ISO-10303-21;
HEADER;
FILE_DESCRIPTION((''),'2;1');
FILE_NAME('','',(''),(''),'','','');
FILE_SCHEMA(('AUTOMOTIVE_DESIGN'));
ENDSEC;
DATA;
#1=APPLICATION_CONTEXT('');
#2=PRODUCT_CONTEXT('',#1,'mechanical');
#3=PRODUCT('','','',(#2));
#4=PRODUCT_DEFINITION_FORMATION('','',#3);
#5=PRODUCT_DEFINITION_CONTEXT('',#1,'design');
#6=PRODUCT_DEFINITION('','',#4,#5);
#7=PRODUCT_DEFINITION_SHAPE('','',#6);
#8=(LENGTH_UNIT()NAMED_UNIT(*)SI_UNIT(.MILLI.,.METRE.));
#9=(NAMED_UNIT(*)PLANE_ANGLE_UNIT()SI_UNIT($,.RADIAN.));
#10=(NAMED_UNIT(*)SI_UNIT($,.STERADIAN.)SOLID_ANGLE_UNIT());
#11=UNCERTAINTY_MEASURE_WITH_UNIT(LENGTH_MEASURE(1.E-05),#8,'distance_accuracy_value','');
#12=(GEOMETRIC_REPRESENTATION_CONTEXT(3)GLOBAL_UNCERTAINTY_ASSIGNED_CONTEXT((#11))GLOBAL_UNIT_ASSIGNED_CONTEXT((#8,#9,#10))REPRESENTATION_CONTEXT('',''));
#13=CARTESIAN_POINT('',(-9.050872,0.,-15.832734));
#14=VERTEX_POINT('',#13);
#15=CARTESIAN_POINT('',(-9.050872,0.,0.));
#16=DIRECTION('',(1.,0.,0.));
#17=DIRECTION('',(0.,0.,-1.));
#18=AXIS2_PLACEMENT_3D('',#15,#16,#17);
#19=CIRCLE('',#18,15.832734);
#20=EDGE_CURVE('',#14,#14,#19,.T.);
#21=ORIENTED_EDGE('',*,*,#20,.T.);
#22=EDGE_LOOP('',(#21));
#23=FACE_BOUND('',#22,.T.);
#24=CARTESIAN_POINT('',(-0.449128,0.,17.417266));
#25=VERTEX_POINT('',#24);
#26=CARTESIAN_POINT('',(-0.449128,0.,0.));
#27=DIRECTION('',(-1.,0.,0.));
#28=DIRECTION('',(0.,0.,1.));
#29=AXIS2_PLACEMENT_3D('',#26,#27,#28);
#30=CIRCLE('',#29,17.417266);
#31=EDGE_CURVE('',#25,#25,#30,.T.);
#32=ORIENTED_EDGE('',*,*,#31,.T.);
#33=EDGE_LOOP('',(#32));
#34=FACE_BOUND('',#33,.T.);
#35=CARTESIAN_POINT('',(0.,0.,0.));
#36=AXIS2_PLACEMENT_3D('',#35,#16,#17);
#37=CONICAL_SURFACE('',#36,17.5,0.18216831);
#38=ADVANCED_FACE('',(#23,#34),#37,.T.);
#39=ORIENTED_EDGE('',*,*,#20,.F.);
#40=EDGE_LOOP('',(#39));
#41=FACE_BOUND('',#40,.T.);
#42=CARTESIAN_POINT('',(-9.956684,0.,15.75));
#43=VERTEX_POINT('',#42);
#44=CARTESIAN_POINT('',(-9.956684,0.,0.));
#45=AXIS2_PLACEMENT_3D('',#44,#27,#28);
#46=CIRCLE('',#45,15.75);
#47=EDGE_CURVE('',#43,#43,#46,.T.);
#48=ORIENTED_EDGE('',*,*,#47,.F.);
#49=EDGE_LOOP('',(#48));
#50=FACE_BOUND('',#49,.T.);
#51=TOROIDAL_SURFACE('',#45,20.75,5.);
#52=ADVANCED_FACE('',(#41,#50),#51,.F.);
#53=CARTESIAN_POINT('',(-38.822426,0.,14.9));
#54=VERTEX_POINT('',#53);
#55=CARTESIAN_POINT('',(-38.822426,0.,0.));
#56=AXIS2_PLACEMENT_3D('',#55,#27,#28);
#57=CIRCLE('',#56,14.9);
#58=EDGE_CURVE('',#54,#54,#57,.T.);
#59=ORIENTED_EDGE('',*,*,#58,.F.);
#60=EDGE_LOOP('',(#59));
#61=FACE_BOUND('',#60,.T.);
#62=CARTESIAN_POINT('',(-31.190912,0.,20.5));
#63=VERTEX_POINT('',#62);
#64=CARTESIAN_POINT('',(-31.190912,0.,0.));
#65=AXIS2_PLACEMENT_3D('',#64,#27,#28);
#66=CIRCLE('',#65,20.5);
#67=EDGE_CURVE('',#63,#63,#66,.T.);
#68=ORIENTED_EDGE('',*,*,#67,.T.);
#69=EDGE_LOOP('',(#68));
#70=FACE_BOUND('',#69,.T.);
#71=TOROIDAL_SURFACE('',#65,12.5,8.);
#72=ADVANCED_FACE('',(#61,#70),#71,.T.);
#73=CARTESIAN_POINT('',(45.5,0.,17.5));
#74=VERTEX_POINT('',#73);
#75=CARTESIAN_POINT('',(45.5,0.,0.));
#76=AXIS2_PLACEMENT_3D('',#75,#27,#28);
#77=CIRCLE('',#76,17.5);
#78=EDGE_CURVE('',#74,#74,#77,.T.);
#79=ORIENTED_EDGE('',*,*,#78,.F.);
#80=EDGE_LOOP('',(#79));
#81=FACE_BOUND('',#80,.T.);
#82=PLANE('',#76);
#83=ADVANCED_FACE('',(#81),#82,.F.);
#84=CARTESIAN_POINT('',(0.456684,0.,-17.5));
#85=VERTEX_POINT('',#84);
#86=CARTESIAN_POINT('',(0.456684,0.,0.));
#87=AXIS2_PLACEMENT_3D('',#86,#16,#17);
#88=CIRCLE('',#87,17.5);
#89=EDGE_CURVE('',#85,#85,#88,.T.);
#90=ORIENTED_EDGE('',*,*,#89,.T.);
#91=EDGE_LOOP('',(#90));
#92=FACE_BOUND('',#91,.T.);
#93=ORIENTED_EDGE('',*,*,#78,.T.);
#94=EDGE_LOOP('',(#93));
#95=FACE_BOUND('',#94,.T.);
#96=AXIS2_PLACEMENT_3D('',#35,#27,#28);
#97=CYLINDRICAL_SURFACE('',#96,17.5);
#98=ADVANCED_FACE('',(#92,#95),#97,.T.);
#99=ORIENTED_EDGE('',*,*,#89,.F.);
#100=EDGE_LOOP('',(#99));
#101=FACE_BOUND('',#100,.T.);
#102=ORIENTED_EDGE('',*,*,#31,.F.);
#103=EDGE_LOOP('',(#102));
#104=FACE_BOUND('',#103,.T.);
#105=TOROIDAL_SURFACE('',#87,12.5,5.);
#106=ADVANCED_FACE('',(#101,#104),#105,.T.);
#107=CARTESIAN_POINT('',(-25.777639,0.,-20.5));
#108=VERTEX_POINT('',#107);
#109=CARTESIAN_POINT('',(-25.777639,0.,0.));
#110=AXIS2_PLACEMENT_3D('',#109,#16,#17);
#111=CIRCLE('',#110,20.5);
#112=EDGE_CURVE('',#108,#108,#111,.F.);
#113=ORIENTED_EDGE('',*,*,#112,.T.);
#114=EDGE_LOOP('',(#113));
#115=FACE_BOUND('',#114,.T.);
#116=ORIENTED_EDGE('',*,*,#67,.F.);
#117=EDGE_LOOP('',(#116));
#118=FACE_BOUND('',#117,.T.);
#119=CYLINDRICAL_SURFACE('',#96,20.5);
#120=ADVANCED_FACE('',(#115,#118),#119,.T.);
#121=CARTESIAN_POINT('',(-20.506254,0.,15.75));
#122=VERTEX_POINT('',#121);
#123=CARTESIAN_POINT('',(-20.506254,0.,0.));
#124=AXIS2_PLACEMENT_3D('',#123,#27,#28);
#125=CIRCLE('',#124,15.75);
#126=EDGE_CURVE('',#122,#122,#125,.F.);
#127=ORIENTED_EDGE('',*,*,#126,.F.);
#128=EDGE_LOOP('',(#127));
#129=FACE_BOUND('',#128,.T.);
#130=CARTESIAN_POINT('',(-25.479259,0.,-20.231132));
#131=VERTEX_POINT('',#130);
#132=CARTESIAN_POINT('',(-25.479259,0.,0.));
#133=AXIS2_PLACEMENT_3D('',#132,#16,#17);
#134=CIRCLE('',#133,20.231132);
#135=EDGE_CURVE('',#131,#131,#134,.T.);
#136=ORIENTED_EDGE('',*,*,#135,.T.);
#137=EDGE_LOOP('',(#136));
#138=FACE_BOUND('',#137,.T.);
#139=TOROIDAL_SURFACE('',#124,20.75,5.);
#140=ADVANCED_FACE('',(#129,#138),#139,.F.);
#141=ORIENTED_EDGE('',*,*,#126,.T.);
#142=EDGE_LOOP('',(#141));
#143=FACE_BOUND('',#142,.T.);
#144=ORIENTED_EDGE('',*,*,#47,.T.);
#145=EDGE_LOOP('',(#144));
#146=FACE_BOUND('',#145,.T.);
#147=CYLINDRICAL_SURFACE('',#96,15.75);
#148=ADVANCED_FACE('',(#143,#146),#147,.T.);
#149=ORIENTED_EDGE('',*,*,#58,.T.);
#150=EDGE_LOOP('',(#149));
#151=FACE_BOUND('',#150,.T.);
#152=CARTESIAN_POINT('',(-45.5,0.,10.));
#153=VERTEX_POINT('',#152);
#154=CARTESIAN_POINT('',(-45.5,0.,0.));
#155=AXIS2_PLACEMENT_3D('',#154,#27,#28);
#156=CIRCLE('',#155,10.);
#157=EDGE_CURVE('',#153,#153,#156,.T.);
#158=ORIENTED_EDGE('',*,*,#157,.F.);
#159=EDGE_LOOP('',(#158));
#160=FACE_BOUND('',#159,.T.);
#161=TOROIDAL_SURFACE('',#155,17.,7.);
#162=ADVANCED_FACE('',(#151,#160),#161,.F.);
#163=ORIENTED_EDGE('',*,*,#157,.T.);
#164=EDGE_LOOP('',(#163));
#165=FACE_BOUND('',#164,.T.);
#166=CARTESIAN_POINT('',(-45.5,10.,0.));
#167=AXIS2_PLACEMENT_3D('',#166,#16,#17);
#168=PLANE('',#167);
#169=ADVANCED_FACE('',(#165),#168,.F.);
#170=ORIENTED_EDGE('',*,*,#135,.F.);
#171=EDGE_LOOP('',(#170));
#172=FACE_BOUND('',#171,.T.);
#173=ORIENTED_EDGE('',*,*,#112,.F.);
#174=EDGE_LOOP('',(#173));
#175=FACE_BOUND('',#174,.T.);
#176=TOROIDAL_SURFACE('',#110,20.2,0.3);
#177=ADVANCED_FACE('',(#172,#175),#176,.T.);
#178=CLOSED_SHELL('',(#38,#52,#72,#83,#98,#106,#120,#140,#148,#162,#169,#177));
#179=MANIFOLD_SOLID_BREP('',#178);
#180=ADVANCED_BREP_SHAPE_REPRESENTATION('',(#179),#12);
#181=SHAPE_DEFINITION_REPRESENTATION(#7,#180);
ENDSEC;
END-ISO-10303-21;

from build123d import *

# Parameters (mm, degrees)
FILLET1_R = 5
FILLET2_R = 0.3
FILLET3_R = 5


with BuildPart() as part:
    # Sketch3 → Revolve1 (revolve)
    with BuildSketch(Plane.XY, mode=Mode.PRIVATE) as revolve1_sk:
        with BuildLine():
            Line((45.5, 0), (45.5, 17.499999999999996))
            Line((45.5, 17.499999999999996), (0, 17.500000000006253))
            Line((0, 17.500000000006253), (-9.5, 15.75))
            Line((-9.5, 15.75), (-25.499999999999996, 15.749999999999996))
            Line((-25.499999999999996, 15.749999999999996), (-25.499999999999996, 20.5))
            Line((-25.499999999999996, 20.5), (-31.190911978745817, 20.5))
            ThreePointArc((-31.190911978745817, 20.5), (-35.92377580522551, 18.949806198638836), (-38.82242559008138, 14.9))
            ThreePointArc((-38.82242559008138, 14.9), (-41.358744151830265, 11.356419576191016), (-45.5, 10))
            Line((-45.5, 10), (-45.5, 0))
            Line((-45.5, 0), (45.5, 0))
        make_face()
    revolve(revolve1_sk.sketch.rotate(Axis((0, 0, 0), (1, 0, 0)), 90), axis=Axis((0, 0, 0), (1, 0, 0)))

    # Fillet1
    # the kernel refuses this fillet: 5 mm, written as the material it adds along each edge
    with BuildSketch(Plane(origin=(-25.499999999999996, 0, 0), x_dir=(0, 1.1e-16, 1), z_dir=(0, 1, -1.1e-16))) as fillet1_piece_1:
        with BuildLine():
            CenterArc((20.75, 4.993746088859542), FILLET1_R, 180, 87.13401601740111)
            Line((20.5, -3.55e-15), (20.495, -0.09987492177719304))
            ThreePointArc((20.495, -0.09987492177719304), (18.125, -0.10000000000000142), (15.749999999999996, -0.10000000000000142))
            Line((15.749999999999996, -0.10000000000000142), (15.649999999999997, 0))
            Line((15.649999999999997, 0), (15.65, 4.993746088859542))
            Line((15.65, 4.993746088859542), (15.75, 4.993746088859542))
        make_face()
    revolve(axis=Axis((-25.499999999999996, 0, 0), (1, 0, 0)))

    # Fillet2
    fillet2_edges = [part.edges().sort_by_distance(p)[0] for p in [
        (-25.499999999999996, -1.389e-14, -20.5),
    ]]
    fillet(fillet2_edges, radius=FILLET2_R)

    # Fillet3
    fillet3_edges = [part.edges().sort_by_distance(p)[0] for p in [
        (0, -4.09e-15, -17.500000000006253),
        (-9.5, -3.68e-15, -15.75),
    ]]
    fillet(fillet3_edges, radius=FILLET3_R)


solid = part.part
